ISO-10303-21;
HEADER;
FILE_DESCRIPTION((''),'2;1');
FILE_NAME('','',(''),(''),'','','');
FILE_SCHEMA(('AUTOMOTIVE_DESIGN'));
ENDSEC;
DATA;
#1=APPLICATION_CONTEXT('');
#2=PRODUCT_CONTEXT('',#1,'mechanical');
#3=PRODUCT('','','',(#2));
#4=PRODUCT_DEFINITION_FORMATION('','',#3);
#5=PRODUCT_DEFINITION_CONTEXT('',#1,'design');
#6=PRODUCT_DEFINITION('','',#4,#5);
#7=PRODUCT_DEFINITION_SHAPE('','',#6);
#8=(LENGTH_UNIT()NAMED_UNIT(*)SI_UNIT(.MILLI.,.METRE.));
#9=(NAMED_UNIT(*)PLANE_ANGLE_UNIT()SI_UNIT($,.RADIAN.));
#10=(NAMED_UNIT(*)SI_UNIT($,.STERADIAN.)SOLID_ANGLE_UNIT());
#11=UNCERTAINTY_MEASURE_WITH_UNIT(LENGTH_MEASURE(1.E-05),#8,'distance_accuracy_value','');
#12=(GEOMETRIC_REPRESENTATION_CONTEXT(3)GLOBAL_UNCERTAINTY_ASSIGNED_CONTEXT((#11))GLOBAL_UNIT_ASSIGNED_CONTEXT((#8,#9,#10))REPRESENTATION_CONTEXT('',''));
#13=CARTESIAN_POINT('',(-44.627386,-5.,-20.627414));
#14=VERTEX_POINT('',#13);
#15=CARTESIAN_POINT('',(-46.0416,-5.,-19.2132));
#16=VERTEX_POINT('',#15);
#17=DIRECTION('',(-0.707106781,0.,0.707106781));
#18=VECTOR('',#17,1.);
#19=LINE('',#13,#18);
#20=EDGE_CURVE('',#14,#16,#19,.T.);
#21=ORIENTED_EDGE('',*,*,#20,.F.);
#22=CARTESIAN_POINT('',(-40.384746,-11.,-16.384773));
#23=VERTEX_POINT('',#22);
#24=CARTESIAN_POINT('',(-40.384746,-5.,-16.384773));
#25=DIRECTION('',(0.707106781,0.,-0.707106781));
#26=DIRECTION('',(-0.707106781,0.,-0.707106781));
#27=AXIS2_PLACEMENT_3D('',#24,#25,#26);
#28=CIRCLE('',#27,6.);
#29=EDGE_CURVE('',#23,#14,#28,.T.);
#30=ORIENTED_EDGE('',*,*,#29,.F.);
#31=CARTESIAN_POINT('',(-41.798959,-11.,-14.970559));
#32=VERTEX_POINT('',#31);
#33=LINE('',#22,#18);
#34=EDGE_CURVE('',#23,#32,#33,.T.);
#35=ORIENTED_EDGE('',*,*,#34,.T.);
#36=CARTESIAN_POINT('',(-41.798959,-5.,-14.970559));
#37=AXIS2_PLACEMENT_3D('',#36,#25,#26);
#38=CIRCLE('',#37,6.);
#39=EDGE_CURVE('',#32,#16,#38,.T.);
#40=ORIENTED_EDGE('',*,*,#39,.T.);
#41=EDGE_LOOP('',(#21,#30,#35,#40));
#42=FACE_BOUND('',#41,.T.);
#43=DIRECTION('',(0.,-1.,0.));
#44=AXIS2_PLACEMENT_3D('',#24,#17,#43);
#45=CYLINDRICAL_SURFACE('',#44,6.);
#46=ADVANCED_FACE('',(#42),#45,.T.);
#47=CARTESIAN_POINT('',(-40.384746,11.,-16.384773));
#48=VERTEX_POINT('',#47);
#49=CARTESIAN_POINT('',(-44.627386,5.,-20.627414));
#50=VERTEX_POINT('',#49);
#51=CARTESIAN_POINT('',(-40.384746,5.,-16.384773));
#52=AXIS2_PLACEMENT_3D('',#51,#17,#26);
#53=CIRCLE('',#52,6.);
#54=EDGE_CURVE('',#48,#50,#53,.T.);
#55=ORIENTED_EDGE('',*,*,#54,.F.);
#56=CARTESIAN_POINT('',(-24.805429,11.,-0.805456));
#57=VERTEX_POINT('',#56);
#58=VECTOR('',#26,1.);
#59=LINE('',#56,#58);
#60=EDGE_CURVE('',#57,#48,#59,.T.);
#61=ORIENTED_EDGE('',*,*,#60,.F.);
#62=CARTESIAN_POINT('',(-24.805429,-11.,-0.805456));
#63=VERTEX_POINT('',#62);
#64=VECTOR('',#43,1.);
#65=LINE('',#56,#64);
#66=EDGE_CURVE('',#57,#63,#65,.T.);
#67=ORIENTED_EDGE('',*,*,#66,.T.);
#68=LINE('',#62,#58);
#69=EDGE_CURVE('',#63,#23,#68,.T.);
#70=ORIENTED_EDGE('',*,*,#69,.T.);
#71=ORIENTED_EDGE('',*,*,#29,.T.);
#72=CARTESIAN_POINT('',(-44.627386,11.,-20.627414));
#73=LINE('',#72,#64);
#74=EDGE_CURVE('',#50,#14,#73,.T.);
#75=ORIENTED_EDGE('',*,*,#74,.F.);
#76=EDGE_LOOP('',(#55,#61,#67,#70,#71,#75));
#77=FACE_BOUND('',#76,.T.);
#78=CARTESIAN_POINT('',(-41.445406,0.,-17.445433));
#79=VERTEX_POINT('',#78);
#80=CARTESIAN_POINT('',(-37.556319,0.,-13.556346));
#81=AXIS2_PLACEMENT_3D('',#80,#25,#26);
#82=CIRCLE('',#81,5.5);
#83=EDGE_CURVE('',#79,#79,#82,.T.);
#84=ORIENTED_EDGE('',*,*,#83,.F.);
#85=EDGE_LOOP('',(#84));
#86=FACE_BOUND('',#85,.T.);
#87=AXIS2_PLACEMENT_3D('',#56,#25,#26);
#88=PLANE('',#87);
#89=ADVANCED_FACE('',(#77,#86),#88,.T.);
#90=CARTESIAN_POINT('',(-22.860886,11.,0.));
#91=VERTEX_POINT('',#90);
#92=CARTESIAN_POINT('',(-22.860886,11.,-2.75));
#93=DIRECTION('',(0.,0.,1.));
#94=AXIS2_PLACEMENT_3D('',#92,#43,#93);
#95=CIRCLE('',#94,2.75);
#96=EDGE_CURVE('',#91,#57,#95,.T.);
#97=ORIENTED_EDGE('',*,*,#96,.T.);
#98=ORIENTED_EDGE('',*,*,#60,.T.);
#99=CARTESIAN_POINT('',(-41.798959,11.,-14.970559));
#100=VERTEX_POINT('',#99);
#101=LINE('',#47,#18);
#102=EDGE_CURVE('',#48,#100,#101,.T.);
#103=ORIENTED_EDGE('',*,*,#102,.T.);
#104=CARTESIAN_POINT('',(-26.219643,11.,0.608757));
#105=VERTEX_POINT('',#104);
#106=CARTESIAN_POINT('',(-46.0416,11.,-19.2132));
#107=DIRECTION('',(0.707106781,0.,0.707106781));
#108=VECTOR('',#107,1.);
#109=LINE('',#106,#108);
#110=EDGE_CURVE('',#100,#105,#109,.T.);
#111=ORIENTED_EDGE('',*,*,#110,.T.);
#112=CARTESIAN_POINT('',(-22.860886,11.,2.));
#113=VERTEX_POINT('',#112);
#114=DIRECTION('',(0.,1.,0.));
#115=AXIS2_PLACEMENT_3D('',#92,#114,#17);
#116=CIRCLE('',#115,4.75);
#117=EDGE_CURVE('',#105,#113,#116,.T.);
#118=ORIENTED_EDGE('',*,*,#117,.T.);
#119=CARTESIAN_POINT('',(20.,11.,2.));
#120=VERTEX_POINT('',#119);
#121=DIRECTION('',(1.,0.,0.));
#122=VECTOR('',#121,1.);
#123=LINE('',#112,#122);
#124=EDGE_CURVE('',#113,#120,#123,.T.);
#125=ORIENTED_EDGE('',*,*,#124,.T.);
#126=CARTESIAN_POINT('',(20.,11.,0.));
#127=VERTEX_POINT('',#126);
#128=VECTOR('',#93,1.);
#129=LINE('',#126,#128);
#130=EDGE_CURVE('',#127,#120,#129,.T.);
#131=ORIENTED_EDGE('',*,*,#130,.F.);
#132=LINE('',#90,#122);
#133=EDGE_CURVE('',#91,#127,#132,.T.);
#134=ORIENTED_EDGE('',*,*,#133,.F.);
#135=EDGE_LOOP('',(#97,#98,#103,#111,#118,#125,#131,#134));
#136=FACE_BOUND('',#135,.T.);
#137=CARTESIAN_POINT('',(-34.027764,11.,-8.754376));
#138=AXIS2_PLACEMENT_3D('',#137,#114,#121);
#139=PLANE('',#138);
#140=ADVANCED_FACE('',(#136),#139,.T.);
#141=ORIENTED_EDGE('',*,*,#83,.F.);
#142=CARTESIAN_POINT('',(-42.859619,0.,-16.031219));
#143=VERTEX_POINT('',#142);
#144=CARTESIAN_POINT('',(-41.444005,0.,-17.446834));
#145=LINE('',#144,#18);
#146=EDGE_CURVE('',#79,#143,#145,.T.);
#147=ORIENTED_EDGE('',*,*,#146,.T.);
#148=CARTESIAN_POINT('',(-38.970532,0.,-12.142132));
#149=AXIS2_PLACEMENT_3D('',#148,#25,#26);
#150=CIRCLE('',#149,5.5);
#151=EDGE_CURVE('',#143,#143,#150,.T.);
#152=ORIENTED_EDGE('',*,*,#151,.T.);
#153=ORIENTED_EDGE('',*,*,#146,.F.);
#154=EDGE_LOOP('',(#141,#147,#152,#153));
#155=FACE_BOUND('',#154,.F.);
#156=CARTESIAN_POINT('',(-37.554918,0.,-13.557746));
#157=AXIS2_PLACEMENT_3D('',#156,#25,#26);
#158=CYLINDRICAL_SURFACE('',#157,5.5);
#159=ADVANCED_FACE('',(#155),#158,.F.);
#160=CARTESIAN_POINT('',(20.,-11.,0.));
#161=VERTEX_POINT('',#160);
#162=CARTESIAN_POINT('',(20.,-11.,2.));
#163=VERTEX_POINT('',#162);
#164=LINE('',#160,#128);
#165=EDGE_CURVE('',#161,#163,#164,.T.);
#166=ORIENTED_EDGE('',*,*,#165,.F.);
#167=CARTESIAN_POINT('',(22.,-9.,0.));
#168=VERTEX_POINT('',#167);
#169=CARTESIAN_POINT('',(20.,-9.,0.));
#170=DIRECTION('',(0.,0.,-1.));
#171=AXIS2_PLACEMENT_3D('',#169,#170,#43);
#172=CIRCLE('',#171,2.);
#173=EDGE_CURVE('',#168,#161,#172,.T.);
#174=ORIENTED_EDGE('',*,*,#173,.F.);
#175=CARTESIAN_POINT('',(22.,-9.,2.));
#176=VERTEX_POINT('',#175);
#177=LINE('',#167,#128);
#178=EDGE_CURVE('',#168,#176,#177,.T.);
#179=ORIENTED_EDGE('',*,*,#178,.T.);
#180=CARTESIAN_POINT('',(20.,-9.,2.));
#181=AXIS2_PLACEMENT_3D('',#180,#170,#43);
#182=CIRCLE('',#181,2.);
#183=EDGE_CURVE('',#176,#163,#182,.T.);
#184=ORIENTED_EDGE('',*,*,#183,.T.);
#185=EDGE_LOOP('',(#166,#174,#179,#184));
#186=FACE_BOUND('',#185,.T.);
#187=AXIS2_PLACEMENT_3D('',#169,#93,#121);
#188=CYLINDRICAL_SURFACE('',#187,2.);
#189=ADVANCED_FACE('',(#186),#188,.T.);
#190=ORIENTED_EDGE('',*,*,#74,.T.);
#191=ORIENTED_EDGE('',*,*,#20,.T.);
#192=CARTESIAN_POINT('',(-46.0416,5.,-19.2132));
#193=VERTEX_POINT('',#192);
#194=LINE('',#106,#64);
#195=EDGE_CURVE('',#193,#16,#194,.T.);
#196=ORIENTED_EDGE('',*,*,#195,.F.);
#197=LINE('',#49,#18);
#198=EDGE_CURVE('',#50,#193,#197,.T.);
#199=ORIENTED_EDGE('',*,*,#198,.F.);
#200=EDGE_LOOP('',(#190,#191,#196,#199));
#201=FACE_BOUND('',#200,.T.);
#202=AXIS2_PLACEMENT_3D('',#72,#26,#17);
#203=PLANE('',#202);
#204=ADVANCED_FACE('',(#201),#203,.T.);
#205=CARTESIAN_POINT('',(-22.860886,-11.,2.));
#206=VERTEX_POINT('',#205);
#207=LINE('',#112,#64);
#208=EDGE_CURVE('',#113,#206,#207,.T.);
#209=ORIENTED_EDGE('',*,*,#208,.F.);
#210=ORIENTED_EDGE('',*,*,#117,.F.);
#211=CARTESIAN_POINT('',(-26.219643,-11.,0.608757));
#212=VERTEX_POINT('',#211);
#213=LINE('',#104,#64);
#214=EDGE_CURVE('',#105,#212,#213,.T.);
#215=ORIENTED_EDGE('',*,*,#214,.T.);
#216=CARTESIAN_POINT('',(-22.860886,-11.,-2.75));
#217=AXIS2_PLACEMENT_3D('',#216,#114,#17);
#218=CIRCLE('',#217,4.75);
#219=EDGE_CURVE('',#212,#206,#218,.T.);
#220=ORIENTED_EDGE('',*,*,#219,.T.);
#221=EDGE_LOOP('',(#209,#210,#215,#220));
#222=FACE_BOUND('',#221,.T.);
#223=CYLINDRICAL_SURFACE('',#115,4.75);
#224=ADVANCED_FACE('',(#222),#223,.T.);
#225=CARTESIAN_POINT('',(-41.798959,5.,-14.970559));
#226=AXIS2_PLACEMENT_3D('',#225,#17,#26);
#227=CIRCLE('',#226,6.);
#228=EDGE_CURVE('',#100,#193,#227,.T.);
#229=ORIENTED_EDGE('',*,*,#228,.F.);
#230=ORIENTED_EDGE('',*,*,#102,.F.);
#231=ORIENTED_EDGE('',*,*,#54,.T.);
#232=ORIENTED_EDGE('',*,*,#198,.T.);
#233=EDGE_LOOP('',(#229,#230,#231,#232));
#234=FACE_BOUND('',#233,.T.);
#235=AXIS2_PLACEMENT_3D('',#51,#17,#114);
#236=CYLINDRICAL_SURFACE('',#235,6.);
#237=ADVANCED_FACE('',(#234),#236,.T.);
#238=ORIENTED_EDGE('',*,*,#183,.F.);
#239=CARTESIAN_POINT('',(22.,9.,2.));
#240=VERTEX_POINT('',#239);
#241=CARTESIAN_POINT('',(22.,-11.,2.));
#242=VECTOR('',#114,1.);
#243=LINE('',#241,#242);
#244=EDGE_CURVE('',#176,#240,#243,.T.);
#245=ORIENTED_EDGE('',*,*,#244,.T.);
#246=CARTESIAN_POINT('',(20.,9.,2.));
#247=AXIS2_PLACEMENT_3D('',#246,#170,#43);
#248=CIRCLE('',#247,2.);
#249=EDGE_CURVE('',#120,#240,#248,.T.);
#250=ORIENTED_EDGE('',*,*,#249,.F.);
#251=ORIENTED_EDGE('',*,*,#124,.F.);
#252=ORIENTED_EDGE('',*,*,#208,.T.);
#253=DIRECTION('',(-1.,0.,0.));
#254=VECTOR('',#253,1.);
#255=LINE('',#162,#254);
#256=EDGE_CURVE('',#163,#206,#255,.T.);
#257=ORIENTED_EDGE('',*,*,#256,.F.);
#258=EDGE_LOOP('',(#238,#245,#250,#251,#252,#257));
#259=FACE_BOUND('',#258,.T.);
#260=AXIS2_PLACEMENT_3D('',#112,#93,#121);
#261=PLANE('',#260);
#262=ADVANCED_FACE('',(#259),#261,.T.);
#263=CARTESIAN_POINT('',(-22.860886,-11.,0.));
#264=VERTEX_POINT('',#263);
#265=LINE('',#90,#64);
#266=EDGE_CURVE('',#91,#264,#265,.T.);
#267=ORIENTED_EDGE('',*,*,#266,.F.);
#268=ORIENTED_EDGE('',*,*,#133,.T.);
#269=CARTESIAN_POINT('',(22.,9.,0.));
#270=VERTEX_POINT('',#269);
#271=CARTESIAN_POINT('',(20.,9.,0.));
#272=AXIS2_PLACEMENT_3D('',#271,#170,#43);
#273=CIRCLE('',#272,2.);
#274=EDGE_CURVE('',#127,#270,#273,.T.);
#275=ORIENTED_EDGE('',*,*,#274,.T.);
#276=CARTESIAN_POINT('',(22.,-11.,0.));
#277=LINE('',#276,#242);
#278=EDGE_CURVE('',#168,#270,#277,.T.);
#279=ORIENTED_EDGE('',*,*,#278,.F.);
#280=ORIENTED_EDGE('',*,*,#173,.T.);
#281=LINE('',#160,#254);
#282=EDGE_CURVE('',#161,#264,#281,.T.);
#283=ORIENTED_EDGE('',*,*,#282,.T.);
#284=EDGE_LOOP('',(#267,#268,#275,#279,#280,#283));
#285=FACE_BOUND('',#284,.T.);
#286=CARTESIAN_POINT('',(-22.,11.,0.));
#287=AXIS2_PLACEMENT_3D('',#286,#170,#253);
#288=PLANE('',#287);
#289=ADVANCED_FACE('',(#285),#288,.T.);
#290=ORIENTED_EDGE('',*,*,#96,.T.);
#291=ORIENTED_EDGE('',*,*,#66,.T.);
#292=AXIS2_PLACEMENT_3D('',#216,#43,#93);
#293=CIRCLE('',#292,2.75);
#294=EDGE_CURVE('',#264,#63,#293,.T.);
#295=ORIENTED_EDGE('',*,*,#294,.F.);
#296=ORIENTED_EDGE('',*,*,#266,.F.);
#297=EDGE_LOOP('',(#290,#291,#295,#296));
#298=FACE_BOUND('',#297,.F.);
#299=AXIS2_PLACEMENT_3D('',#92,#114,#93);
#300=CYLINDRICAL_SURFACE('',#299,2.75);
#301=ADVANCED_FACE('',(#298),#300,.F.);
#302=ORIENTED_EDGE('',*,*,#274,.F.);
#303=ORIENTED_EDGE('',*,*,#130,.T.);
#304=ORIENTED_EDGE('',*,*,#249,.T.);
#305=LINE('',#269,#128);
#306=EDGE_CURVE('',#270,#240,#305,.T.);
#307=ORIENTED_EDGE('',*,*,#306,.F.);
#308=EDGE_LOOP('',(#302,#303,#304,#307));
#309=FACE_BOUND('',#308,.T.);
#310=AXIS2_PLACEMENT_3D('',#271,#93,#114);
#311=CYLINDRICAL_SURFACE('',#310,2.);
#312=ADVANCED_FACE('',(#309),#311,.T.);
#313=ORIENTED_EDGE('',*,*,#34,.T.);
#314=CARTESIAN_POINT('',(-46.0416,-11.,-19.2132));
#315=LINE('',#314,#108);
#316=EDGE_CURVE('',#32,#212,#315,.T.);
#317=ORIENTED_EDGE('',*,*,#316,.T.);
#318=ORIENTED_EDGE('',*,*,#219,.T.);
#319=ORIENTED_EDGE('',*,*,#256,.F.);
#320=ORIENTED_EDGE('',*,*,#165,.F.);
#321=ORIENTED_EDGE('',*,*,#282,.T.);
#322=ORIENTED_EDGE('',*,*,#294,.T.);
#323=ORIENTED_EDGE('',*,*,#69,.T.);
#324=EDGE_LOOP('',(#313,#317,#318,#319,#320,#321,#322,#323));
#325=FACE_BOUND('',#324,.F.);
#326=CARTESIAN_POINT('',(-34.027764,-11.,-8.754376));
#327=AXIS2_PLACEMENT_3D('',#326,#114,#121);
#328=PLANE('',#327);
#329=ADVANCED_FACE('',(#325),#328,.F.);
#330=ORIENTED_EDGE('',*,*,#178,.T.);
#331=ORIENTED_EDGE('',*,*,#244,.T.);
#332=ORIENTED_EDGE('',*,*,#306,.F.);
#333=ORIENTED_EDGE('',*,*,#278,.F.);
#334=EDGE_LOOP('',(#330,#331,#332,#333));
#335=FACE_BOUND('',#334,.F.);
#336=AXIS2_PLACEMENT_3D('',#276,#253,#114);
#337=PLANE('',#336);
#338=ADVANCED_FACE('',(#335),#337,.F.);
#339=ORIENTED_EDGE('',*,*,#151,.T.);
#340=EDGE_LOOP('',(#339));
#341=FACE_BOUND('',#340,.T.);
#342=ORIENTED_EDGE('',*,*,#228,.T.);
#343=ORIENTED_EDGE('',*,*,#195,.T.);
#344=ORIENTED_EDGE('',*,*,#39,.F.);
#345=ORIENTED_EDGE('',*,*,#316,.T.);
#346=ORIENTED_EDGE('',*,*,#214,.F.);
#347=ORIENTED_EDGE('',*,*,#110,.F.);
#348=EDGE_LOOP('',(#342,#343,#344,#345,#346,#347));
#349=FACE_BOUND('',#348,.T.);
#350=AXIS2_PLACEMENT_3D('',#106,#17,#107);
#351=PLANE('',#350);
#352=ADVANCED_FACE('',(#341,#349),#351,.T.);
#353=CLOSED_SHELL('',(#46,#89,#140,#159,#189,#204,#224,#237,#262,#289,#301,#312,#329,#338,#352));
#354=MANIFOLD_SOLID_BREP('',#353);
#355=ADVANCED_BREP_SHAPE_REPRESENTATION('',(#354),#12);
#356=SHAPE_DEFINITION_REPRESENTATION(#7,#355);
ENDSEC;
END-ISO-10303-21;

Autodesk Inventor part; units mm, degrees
ref_plane "YZ Plane" through (0, 0, 0) normal (1, 0, 0) x (0, 1, 0)
ref_plane "XZ Plane" through (0, 0, 0) normal (0, 1, 0) x (-1, 0, 0)
ref_plane "XY Plane" through (0, 0, 0) normal (0, 0, 1) x (1, 0, 0)
sketch "Sketch1" plane through (0, 0, 0) normal (0, 0, 1) x (1, 0, 0)
  line L0 (-22, -11) -> (22, -11)
  line L1 (22, -11) -> (22, 11)
  line L2 (22, 11) -> (-22, 11)
  line L3 (-22, 11) -> (-22, -11)
  line L4 (-22, -11) -> (22, 11) construction
  line L5 (22, -11) -> (-22, 11) construction
  point P0 (0, 0)
  dimension "d154" = 44
  dimension "d155" = 22
extrude "Plate5" add sketch "Sketch1" along normal blind 2
fillet "Corner Round1" radius 2 2 edges at (22, 11, 1) (22, -11, 1)
sketch "Sketch10" plane through (-23.4142, 11, 3.4142) normal (0.7071068, 0, -0.7071068) x (0, 1, 0)
  line L0 (-22, 0) -> (0, 0)
  line L1 (0, 0) -> (0, -32)
  line L2 (0, -32) -> (-22, -32)
  line L3 (-22, -32) -> (-22, 0)
edge flange "Flange4" height 30 angle 45 thickness 2 bend radius 2.75 thickness toward (0.7071068, 0, -0.7071068) relief round relief width 2 relief depth 1 edges at (-22, 0, 0) wall of the first edge with corners at (-23.4142, -11, 3.4142) (-23.4142, 11, 3.4142) (-46.0416, 11, -19.2132) (-46.0416, -11, -19.2132)
bend "Bend4"
corner "Corner4"
sketch "Sketch11" plane through (-44.6274, -11, -20.6274) normal (0.7071068, 0, -0.7071068) x (-0.7071068, 0, -0.7071068)
  line L0 (-28.0325, 22) -> (-28.0325, 0) construction
  line L1 (0, 0) -> (-28.0325, 0) construction
  line L2 (0, 0) -> (0, 22) construction
  line L3 (0, 22) -> (-28.0325, 22) construction
  circle A0 centre (-10, 11) radius 5.5
  point P0 (-46.1421, 11)
  point P1 (0, 11)
  dimension "d192" = 11
  dimension "d193" = 10
extrude "Cut3" cut sketch "Sketch11" against normal blind 2
fillet "Corner Round3" radius 6 2 edges at (-45.3345, 11, -19.9203) (-45.3345, -11, -19.9203)
properties part number "TKS 3563 FDS support cup" material "Stainless Steel"
